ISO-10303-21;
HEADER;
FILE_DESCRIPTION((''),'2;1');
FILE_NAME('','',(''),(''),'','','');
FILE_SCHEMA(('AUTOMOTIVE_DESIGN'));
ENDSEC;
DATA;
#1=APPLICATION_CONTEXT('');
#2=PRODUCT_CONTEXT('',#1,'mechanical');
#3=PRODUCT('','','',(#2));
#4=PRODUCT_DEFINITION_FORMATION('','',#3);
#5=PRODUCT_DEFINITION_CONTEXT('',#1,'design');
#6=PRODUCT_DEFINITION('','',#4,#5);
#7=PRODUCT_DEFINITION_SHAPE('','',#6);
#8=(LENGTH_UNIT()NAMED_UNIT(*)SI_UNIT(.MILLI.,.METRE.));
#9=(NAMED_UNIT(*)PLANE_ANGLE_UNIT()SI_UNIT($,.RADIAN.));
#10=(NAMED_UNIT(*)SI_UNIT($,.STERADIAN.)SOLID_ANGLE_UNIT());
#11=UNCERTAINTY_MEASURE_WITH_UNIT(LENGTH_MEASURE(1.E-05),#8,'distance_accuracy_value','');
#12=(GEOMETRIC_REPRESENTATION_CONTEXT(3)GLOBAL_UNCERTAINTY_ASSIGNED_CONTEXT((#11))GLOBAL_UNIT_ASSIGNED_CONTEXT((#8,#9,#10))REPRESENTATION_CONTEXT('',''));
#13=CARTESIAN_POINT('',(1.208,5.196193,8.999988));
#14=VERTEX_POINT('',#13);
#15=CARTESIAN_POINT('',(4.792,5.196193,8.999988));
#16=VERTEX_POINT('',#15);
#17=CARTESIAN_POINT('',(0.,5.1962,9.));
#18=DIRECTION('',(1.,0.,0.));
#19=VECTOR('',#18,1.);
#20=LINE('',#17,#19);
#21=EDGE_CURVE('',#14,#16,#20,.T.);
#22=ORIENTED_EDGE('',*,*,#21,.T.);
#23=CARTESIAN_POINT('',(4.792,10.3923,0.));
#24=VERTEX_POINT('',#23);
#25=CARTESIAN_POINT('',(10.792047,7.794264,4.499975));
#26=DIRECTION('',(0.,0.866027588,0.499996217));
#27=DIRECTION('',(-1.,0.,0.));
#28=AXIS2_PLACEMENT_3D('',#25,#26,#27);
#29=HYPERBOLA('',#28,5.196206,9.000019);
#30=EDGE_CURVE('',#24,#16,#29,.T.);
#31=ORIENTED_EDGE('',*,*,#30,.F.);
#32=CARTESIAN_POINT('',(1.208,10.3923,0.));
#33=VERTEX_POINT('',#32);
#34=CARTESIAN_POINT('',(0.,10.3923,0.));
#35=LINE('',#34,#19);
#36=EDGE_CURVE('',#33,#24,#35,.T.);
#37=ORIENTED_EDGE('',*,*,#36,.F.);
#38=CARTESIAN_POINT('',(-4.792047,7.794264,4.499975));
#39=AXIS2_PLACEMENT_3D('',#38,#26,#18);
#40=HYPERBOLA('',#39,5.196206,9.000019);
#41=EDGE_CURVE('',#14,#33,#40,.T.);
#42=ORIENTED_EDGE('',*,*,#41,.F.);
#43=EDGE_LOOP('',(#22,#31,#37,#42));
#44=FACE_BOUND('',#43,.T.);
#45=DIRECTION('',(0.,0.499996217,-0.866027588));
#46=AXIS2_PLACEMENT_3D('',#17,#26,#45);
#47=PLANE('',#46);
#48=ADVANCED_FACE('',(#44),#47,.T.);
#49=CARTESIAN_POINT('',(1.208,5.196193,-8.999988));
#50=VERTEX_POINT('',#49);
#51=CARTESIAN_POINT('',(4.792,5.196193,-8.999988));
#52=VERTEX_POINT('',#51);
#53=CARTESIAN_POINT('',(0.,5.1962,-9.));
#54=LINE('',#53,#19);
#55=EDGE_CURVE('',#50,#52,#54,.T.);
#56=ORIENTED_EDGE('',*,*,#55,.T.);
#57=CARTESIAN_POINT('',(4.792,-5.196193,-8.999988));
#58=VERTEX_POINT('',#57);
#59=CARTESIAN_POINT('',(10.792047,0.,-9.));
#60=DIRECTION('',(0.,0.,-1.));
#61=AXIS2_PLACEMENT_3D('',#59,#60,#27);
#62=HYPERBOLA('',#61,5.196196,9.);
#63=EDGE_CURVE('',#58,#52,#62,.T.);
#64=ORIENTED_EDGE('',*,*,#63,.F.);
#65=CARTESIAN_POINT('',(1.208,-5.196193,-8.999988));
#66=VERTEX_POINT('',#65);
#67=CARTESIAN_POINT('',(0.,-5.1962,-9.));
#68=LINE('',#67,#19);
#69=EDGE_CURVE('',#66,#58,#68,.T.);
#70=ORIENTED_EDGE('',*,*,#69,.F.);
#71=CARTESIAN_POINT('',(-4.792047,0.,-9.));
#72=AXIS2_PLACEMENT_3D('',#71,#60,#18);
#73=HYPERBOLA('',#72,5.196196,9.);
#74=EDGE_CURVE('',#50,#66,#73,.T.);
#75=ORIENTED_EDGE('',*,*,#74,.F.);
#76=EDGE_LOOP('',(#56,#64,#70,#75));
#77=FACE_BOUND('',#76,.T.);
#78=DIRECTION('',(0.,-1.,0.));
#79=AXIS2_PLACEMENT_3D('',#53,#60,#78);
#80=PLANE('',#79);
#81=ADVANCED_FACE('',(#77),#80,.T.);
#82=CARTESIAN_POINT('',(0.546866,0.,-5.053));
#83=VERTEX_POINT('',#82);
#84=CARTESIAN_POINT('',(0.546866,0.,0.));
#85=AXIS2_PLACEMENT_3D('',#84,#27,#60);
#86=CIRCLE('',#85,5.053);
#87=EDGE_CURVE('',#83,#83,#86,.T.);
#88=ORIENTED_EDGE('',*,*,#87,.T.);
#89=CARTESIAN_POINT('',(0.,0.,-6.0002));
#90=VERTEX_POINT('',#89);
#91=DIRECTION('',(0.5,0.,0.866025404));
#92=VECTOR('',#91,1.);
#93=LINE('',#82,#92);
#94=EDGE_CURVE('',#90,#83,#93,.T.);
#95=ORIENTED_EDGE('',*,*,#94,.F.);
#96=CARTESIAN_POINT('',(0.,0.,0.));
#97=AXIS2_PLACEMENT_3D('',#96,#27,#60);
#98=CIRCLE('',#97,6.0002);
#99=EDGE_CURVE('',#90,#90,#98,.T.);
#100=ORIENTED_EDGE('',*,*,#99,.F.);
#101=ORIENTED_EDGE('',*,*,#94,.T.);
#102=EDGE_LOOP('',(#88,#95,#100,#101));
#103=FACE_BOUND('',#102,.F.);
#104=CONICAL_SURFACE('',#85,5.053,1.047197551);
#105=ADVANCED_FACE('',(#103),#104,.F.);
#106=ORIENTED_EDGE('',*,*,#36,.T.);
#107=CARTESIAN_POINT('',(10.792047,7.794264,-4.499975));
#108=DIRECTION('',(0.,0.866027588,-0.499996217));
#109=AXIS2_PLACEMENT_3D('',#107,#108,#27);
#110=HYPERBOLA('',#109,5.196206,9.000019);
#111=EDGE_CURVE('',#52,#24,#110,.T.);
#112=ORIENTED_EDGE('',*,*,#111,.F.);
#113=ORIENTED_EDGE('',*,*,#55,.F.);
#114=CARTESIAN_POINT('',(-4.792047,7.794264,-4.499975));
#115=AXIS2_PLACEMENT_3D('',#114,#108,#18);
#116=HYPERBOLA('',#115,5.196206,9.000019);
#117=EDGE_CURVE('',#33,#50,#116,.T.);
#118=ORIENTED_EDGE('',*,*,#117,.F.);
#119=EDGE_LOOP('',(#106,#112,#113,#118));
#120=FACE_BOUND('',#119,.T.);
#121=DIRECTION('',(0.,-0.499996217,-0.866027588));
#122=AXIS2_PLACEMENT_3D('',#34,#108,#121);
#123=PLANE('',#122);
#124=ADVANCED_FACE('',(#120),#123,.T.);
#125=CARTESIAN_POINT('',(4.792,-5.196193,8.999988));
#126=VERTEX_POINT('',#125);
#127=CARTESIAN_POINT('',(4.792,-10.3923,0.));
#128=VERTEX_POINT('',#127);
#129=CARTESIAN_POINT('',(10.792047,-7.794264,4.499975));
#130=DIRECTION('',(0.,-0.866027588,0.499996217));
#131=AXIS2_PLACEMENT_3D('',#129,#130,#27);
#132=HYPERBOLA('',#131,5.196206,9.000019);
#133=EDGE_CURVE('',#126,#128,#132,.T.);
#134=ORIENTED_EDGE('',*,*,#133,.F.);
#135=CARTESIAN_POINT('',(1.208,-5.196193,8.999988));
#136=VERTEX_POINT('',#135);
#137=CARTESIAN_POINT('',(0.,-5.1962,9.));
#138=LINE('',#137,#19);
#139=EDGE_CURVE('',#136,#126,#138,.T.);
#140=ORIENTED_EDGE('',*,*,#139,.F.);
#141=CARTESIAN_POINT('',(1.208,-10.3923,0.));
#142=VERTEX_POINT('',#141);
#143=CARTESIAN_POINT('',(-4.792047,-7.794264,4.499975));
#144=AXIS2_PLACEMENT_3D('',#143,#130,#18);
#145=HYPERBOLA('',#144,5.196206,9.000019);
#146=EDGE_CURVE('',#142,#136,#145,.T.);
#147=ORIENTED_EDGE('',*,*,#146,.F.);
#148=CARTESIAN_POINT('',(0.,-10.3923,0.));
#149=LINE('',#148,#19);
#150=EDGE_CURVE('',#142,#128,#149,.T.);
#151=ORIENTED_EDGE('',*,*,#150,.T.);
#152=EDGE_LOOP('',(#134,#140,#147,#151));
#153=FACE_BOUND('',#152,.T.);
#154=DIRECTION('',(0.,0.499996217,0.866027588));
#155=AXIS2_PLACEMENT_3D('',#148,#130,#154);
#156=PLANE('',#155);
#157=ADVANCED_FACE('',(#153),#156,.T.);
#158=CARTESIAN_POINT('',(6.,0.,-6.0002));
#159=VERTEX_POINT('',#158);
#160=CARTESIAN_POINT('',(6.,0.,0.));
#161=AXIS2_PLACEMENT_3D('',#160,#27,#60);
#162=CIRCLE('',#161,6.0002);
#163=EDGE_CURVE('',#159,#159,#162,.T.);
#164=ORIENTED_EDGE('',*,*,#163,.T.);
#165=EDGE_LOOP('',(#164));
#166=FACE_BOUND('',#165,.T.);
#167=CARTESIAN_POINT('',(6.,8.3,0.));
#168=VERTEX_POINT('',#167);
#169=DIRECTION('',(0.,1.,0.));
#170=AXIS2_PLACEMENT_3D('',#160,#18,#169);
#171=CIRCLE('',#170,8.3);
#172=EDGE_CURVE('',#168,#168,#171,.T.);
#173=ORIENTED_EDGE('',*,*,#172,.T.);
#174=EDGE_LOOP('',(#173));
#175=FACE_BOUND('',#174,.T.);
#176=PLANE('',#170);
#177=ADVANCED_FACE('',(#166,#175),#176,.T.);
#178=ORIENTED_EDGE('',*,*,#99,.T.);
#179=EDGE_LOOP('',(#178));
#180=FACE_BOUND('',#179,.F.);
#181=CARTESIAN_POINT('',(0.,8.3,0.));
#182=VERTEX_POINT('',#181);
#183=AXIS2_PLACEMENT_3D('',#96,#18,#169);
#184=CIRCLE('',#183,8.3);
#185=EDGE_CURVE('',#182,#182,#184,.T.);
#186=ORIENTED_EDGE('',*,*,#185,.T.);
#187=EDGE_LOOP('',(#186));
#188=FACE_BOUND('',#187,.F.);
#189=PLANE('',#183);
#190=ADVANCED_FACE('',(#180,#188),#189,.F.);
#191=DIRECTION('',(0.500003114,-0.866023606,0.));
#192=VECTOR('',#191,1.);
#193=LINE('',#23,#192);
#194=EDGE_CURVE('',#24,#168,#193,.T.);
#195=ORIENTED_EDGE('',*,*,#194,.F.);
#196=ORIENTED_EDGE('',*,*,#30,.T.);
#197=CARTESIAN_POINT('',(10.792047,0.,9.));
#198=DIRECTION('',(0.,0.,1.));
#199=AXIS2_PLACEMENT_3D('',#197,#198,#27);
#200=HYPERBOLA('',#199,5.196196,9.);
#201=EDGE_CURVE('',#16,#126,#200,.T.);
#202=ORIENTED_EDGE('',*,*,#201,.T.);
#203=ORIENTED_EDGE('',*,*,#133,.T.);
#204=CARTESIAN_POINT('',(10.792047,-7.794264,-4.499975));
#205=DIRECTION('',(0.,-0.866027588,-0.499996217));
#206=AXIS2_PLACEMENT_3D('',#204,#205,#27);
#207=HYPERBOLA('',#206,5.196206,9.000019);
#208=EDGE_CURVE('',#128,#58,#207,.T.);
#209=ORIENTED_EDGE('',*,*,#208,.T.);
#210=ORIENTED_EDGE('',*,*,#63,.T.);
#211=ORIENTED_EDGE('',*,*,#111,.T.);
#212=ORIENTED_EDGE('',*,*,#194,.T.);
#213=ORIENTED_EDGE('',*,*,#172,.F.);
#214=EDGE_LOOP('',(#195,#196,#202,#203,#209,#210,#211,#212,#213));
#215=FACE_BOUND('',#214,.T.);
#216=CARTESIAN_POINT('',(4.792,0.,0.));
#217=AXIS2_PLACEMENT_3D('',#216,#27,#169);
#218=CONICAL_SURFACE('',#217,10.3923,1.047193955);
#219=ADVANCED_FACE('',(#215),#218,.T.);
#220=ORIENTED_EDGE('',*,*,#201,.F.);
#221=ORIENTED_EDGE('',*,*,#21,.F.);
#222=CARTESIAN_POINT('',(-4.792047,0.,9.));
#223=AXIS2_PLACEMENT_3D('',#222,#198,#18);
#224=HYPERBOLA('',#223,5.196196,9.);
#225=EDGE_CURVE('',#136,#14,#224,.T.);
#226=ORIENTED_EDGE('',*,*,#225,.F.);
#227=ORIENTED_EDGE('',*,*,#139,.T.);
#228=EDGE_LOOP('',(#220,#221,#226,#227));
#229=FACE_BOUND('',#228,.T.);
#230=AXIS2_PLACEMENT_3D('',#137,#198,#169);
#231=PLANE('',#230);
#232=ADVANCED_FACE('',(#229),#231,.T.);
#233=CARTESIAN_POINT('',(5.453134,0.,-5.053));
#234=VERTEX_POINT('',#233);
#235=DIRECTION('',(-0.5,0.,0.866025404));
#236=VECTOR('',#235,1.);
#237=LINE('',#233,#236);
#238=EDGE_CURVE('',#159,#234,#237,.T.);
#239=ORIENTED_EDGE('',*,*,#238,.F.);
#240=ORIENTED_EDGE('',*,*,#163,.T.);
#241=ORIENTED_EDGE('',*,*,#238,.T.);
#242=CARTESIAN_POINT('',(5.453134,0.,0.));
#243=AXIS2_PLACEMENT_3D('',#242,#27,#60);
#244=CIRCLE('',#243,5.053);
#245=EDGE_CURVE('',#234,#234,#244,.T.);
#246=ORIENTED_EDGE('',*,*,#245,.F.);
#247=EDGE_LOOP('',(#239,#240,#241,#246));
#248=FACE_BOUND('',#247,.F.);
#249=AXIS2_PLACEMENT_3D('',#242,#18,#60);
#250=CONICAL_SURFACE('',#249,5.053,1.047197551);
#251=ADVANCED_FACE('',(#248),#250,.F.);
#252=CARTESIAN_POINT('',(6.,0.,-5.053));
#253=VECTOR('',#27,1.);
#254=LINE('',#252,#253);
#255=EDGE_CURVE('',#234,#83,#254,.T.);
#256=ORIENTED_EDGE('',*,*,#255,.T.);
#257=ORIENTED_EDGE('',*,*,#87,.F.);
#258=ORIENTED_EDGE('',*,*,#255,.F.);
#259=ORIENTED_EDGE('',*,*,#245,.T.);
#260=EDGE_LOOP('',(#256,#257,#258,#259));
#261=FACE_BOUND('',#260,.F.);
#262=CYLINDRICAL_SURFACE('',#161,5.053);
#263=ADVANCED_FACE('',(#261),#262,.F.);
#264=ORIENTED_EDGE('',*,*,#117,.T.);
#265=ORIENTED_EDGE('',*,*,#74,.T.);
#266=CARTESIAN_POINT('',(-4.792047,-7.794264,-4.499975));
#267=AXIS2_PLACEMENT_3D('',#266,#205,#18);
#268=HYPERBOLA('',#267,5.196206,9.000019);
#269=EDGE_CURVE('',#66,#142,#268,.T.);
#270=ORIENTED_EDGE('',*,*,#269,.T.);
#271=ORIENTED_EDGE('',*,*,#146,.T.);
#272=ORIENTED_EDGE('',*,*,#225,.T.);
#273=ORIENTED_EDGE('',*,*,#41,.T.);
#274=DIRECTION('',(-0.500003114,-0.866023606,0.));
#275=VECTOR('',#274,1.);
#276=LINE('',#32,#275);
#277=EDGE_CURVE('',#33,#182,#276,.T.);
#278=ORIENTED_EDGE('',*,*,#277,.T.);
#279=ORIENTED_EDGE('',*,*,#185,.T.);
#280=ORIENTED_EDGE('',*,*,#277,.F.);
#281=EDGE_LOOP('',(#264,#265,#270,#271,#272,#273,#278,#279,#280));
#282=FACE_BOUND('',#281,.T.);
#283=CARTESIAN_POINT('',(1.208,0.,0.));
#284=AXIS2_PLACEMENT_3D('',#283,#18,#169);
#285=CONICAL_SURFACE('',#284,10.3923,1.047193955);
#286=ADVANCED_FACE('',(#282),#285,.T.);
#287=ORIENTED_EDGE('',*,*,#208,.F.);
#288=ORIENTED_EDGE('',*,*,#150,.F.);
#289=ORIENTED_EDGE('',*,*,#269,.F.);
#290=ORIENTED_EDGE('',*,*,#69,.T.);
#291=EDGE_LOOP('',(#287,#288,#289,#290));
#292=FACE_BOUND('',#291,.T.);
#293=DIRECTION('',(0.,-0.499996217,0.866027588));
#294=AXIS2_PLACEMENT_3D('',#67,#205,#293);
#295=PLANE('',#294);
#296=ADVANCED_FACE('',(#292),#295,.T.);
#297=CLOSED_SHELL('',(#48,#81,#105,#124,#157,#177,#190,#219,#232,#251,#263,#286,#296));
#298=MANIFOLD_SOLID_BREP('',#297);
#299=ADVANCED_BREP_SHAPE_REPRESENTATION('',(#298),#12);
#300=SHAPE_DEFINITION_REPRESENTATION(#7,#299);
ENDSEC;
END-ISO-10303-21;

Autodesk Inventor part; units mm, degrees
ref_plane "YZ Plane" through (0, 0, 0) normal (1, 0, 0) x (0, 1, 0)
ref_plane "XZ Plane" through (0, 0, 0) normal (0, 1, 0) x (-1, 0, 0)
sketch "Náčrt1" plane through (0, 0, 0) normal (1, 0, 0) x (0, 1, 0)
  line L0 (-10.3923, 0) -> (-5.1962, 9)
  line L1 (-5.1962, 9) -> (5.1962, 9)
  line L2 (5.1962, 9) -> (10.3923, 0)
  line L3 (10.3923, 0) -> (5.1962, -9)
  line L4 (5.1962, -9) -> (-5.1962, -9)
  line L5 (-5.1962, -9) -> (-10.3923, 0)
  point P0 (0, 0)
  point P1 (0, 0)
  dimension "d0" = 20.7846
extrude "Těleso" add sketch "Náčrt1" along normal blind 6
sketch "Náčrt2" plane through (0, 0, 0) normal (0, 0, 1) x (1, 0, 0)
  line L0 (0, 5.1962) -> (0, 10.3923) projected
  line L1 (0, 10.3923) -> (6, 10.3923) projected
  line L2 (6, 5.1962) -> (6, 10.3923) projected
  line L3 (-1.2, 0) -> (7.2, 0) projected
  line L4 (1.208, 10.3923) -> (0, 8.3)
  line L5 (4.792, 10.3923) -> (6, 8.3)
  dimension "d3" = 30
  dimension "d4" = 30
  dimension "d5" = 16.6
  dimension "d6" = 16.6
revolve "Zkosení1" cut sketch "Náčrt2" angle 360 about axis through (-10, 0, 0) along (1, 0, 0)
sketch "Náčrt3" plane through (6, 0, 0) normal (1, 0, 0) x (0, 0, -1)
  arc A0 (-0.625, -1.0825) -> (0.625, -1.0825) centre (0, 0) ccw projected
hole "Závit" at (6, 0, 0) direction (-1, 0, 0) diameter 10.106 end through all thread size "M12x1.75" class "6H" standard "ISO Metric profile"
chamfer "Zkosení2" distance 0.9472 angle 30 1 edges at (6, 0, 5.053) measured on face at (6, 7.125, -0.8651)
chamfer "Zkosení3" distance 0.9472 angle 30 1 edges at (0, 0, 5.053) measured on face at (0, 7.125, -0.8651)
ref_plane "Work Plane1" through (-22.2728, 0, 0) normal (0, -0.8660254, -0.5) x (1, 0, 0)
equation "\"d0\" = 1.1547 * SW"
equation "\"d1\" = KOH"
equation "\"d3\" = ANG1"
equation "\"d4\" = ANG2"
equation "\"d5\" = SW0"
equation "\"d6\" = SW01"
equation "\"d8\" = -0.5 * GD1 + 0.5 * NND"
equation "\"d40\" = -0.5 * GD1 + 0.5 * NND"
equation "\"d10\" = -0.5 * GD1 + 0.5 * NND"
equation "\"d41\" = -0.5 * GD1 + 0.5 * NND"
equation "\"ANG1\" = 30deg"
equation "\"ANG2\" = 30deg"
equation "\"NND\" = 12"
equation "\"KOH\" = 6"
equation "\"SW\" = 18"
equation "\"SW0\" = 16.6"
equation "\"SW01\" = SW0"
equation "\"GUL\" = 0.541266 * PTC"
equation "\"THREADDIA\" = 12"
equation "\"TOA\" = 30deg"
equation "\"PTC\" = 1.75"
equation "\"E0\" = 1.155 * SW"
equation "\"GAL\" = 0.541266 * PTC"
equation "\"GD1\" = 10.105569"
properties part number "ISO 4035 - M12" material "Nerezová ocel 440C"
